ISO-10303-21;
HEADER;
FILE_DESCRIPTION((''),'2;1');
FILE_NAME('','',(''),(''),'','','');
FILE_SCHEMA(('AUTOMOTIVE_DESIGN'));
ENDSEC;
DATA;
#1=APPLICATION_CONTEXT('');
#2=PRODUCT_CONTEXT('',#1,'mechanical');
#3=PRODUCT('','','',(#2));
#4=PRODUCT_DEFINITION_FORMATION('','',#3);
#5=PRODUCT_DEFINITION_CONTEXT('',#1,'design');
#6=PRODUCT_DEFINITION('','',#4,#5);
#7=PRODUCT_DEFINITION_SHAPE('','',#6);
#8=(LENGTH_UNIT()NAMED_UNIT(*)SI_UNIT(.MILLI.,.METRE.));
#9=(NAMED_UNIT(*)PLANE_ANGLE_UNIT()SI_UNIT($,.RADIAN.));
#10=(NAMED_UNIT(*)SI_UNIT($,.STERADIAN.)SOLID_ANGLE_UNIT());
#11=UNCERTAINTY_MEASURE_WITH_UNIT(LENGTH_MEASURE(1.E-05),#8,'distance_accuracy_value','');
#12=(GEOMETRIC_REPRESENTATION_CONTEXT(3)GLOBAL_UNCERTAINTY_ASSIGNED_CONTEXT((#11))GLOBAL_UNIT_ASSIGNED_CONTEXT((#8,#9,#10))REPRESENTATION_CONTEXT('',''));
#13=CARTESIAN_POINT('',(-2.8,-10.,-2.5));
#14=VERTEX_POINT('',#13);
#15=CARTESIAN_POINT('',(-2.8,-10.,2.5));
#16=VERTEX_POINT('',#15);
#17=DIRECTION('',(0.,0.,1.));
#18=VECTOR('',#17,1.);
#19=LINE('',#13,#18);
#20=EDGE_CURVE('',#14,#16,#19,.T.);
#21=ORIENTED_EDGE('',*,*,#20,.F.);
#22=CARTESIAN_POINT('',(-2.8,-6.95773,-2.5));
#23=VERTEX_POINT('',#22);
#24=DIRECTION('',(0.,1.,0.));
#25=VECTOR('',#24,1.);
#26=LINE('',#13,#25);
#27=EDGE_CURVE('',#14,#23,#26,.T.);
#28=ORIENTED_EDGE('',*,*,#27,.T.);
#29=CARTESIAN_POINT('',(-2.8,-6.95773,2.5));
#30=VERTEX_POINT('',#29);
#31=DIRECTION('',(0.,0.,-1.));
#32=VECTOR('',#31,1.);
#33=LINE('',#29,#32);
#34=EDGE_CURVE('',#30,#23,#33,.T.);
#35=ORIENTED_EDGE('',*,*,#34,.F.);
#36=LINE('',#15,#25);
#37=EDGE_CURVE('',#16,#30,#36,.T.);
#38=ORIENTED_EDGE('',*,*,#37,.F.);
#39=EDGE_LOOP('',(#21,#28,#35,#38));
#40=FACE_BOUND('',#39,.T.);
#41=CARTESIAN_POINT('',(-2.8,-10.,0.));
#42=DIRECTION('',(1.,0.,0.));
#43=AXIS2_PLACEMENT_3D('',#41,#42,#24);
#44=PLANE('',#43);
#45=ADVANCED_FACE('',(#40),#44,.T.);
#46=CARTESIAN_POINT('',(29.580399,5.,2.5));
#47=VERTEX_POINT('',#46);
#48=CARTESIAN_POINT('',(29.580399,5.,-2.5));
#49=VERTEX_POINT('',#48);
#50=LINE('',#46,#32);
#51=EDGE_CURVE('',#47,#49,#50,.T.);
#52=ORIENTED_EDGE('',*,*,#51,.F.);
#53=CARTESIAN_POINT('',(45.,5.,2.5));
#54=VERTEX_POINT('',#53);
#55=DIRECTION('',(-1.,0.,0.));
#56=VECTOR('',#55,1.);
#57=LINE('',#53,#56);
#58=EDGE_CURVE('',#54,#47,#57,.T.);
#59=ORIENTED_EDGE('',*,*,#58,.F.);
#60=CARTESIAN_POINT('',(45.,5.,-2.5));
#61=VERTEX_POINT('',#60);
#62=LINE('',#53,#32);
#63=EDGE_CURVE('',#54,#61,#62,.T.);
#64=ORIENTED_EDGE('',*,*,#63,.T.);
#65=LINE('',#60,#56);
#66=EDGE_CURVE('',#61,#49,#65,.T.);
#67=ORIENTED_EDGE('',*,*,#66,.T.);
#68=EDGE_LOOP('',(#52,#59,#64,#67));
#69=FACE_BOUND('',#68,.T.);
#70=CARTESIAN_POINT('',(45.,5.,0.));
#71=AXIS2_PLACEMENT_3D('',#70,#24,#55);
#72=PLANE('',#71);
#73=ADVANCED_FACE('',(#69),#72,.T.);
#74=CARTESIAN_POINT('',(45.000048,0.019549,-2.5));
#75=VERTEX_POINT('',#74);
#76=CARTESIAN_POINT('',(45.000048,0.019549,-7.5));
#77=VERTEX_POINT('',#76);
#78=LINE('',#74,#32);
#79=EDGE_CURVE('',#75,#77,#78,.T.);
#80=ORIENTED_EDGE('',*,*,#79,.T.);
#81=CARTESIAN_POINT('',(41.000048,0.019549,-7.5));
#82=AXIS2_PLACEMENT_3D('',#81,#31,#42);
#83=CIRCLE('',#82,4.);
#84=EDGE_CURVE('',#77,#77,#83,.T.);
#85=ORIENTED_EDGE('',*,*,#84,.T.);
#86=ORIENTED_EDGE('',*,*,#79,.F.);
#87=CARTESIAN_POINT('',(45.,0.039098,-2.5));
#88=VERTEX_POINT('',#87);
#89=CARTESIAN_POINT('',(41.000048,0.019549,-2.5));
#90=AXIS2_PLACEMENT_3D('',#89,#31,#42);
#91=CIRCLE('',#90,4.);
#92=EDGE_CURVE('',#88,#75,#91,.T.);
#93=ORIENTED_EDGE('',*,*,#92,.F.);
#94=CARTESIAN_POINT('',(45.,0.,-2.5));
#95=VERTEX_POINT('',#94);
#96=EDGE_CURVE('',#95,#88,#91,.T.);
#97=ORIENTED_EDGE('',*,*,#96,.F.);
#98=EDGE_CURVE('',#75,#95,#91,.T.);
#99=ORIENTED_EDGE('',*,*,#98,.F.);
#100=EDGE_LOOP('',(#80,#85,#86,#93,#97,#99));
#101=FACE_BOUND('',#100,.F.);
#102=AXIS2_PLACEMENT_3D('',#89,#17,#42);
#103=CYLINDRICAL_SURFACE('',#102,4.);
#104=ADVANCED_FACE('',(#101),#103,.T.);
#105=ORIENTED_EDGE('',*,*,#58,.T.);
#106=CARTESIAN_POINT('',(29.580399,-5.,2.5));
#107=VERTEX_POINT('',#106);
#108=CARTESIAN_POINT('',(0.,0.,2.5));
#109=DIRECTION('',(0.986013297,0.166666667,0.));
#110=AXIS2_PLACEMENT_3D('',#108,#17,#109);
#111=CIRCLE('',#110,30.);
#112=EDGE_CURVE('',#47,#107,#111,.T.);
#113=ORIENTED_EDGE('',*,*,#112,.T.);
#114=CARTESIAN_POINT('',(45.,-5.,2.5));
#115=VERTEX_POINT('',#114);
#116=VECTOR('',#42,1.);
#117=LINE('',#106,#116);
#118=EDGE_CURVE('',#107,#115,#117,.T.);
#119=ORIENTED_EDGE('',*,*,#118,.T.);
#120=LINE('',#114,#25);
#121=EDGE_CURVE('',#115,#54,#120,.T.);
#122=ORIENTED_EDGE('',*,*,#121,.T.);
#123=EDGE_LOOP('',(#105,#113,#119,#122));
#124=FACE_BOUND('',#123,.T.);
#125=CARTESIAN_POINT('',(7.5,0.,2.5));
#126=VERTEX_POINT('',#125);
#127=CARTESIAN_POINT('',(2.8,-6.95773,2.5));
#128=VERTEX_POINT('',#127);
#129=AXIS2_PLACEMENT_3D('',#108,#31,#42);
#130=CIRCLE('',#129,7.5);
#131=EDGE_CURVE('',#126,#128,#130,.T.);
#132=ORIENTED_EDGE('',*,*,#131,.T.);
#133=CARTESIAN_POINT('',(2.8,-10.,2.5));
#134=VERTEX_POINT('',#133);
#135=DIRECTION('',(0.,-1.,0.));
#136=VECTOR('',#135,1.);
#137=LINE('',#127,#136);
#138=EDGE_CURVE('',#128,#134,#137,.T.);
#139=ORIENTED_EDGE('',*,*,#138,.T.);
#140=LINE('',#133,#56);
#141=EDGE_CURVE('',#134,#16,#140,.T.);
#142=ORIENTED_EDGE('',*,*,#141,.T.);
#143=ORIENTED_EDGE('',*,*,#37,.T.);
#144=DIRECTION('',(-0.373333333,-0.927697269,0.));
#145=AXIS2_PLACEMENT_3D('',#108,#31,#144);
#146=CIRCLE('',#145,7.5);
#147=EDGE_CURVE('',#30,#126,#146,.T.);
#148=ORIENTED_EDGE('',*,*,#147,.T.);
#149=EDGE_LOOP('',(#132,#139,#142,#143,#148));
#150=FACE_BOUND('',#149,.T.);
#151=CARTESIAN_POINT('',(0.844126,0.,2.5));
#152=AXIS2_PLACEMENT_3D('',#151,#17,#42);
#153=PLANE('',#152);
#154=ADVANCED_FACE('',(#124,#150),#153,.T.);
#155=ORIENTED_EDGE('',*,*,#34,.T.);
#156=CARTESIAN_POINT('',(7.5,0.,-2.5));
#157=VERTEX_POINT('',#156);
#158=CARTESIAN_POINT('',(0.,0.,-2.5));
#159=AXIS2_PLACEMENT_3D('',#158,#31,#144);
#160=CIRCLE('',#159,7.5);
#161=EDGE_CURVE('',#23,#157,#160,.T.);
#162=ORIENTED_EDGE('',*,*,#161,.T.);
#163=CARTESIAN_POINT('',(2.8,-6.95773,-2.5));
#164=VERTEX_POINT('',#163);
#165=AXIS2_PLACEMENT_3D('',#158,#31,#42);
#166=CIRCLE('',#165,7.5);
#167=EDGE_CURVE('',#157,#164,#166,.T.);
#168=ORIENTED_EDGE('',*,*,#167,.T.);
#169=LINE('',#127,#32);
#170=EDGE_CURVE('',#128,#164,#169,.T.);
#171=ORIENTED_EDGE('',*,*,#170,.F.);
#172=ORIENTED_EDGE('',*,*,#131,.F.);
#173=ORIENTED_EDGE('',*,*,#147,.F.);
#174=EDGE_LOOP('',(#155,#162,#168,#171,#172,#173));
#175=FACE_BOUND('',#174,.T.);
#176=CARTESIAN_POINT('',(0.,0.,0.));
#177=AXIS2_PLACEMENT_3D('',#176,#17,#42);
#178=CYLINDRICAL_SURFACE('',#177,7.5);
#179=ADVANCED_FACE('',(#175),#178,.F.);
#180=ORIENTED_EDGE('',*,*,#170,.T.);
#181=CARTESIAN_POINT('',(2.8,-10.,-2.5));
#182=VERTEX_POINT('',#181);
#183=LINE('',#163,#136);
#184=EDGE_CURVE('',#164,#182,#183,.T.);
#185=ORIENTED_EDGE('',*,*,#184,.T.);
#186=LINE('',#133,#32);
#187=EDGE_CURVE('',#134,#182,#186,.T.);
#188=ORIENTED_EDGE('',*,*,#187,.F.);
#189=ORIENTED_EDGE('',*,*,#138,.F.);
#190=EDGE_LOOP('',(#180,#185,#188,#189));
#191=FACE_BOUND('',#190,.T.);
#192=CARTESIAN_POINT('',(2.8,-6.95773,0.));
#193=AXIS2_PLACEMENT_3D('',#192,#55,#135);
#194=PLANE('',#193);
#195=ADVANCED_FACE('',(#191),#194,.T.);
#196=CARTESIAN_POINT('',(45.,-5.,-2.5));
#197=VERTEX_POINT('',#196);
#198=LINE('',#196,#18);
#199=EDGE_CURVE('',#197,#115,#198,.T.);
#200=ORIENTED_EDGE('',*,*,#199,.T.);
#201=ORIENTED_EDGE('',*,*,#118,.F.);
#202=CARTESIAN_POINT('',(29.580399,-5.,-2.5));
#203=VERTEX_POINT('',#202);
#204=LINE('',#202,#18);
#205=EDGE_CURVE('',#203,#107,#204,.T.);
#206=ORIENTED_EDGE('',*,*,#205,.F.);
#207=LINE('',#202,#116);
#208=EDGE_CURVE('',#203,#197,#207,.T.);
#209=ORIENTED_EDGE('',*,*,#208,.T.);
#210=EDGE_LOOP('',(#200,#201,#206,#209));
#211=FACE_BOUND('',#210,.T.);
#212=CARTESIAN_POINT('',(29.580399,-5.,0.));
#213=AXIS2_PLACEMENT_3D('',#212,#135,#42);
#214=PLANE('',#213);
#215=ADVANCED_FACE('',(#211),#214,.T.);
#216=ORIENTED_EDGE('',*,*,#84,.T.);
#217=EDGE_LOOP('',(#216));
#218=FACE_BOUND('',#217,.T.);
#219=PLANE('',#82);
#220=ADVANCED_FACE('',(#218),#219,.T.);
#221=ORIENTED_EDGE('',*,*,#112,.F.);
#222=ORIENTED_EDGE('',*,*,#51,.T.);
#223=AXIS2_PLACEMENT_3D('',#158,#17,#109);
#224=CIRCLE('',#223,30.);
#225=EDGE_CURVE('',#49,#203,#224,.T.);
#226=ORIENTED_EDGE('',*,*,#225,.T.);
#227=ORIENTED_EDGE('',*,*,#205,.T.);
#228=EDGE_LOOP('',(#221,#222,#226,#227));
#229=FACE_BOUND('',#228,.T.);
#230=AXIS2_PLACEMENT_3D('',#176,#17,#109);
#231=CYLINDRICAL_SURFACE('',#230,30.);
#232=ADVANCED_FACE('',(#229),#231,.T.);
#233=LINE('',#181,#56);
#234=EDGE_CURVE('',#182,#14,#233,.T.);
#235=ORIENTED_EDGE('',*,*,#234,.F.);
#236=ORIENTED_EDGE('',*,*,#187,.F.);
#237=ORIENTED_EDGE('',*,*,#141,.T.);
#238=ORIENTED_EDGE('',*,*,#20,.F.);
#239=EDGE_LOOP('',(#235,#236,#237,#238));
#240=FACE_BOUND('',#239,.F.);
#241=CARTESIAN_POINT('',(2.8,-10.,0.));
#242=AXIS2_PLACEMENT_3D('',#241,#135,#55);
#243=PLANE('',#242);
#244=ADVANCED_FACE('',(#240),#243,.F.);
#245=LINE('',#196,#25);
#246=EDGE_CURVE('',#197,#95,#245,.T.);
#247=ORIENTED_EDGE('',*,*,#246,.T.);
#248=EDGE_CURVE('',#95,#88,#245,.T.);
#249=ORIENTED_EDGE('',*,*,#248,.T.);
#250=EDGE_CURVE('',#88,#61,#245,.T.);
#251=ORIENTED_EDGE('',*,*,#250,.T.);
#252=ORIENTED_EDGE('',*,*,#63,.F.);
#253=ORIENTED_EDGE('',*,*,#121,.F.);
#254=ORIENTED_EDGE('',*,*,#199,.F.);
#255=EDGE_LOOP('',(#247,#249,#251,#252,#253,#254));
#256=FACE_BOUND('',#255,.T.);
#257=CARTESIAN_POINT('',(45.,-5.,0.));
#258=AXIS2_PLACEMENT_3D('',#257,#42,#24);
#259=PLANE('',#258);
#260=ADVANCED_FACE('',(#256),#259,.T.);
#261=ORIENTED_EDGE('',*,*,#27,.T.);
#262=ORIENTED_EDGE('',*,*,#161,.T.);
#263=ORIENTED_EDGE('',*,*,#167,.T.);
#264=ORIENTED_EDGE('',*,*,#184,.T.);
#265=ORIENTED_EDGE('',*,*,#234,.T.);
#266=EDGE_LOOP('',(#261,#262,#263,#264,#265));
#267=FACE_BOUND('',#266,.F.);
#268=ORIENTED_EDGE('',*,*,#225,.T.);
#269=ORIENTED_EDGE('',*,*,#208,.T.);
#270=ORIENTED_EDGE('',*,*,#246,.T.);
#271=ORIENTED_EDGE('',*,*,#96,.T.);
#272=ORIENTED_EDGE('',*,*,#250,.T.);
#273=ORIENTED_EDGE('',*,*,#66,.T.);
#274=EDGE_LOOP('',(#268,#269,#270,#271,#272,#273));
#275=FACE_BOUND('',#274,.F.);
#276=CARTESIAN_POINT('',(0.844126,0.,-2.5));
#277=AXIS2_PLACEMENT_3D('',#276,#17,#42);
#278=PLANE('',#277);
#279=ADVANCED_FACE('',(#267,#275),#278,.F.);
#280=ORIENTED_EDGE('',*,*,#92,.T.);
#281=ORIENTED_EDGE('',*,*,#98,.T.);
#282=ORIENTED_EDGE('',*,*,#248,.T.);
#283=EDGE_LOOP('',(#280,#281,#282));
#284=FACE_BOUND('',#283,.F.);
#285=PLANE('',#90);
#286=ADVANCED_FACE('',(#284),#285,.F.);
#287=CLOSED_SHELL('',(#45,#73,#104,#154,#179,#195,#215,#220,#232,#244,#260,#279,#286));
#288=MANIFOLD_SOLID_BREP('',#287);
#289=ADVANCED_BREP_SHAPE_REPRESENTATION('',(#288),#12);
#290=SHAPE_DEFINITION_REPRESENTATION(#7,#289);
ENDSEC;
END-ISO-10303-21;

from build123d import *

# Parameters (mm, degrees)
F1_DEPTH = 2.5
F2_R     = 4
F3_DEPTH = 5


with BuildPart() as f1:
    # F0 (on Top) → F1 (new body, symmetric)
    with BuildSketch(Plane.XY):
        with BuildLine():
            ThreePointArc((29.5803989155, -5), (29.8949156836, -2.5087878084), (30, 0))
            ThreePointArc((30, 0), (29.8949156836, 2.5087878084), (29.5803989155, 5))
            ThreePointArc((29.5803989155, 5), (-30, 0), (29.5803989155, -5))
        make_face()
        with BuildLine():
            ThreePointArc((-2.8, -6.9577295147), (-4.1982139059, 6.2149014473), (7.5, 0))
            ThreePointArc((7.5, 0), (6.2149014473, -4.1982139059), (2.8, -6.9577295147))
            Line((2.8, -6.9577295147), (2.8, -10))
            Line((2.8, -10), (0, -10))
            Line((0, -10), (-2.8, -10))
            Line((-2.8, -10), (-2.8, -6.9577295147))
        make_face(mode=Mode.SUBTRACT)
        with BuildLine():
            ThreePointArc((29.5803989155, 5), (29.8949156836, 2.5087878084), (30, 0))
            ThreePointArc((30, 0), (29.8949156836, -2.5087878084), (29.5803989155, -5))
            Line((29.5803989155, -5), (45, -5))
            Line((45, -5), (45, 0))
            Line((45, 0), (45, 5))
            Line((45, 5), (29.5803989155, 5))
        make_face()
    extrude(amount=F1_DEPTH, both=True)

    # F2 (on face) → F3 (join)
    with BuildSketch(Plane(origin=(0, 0, -2.5), x_dir=(1, 0, 0), z_dir=(0, 0, -1))):
        with Locations((41.0000477707, -0.0195490011)):
            Circle(F2_R)
    extrude(amount=F3_DEPTH)


solid = f1.part
